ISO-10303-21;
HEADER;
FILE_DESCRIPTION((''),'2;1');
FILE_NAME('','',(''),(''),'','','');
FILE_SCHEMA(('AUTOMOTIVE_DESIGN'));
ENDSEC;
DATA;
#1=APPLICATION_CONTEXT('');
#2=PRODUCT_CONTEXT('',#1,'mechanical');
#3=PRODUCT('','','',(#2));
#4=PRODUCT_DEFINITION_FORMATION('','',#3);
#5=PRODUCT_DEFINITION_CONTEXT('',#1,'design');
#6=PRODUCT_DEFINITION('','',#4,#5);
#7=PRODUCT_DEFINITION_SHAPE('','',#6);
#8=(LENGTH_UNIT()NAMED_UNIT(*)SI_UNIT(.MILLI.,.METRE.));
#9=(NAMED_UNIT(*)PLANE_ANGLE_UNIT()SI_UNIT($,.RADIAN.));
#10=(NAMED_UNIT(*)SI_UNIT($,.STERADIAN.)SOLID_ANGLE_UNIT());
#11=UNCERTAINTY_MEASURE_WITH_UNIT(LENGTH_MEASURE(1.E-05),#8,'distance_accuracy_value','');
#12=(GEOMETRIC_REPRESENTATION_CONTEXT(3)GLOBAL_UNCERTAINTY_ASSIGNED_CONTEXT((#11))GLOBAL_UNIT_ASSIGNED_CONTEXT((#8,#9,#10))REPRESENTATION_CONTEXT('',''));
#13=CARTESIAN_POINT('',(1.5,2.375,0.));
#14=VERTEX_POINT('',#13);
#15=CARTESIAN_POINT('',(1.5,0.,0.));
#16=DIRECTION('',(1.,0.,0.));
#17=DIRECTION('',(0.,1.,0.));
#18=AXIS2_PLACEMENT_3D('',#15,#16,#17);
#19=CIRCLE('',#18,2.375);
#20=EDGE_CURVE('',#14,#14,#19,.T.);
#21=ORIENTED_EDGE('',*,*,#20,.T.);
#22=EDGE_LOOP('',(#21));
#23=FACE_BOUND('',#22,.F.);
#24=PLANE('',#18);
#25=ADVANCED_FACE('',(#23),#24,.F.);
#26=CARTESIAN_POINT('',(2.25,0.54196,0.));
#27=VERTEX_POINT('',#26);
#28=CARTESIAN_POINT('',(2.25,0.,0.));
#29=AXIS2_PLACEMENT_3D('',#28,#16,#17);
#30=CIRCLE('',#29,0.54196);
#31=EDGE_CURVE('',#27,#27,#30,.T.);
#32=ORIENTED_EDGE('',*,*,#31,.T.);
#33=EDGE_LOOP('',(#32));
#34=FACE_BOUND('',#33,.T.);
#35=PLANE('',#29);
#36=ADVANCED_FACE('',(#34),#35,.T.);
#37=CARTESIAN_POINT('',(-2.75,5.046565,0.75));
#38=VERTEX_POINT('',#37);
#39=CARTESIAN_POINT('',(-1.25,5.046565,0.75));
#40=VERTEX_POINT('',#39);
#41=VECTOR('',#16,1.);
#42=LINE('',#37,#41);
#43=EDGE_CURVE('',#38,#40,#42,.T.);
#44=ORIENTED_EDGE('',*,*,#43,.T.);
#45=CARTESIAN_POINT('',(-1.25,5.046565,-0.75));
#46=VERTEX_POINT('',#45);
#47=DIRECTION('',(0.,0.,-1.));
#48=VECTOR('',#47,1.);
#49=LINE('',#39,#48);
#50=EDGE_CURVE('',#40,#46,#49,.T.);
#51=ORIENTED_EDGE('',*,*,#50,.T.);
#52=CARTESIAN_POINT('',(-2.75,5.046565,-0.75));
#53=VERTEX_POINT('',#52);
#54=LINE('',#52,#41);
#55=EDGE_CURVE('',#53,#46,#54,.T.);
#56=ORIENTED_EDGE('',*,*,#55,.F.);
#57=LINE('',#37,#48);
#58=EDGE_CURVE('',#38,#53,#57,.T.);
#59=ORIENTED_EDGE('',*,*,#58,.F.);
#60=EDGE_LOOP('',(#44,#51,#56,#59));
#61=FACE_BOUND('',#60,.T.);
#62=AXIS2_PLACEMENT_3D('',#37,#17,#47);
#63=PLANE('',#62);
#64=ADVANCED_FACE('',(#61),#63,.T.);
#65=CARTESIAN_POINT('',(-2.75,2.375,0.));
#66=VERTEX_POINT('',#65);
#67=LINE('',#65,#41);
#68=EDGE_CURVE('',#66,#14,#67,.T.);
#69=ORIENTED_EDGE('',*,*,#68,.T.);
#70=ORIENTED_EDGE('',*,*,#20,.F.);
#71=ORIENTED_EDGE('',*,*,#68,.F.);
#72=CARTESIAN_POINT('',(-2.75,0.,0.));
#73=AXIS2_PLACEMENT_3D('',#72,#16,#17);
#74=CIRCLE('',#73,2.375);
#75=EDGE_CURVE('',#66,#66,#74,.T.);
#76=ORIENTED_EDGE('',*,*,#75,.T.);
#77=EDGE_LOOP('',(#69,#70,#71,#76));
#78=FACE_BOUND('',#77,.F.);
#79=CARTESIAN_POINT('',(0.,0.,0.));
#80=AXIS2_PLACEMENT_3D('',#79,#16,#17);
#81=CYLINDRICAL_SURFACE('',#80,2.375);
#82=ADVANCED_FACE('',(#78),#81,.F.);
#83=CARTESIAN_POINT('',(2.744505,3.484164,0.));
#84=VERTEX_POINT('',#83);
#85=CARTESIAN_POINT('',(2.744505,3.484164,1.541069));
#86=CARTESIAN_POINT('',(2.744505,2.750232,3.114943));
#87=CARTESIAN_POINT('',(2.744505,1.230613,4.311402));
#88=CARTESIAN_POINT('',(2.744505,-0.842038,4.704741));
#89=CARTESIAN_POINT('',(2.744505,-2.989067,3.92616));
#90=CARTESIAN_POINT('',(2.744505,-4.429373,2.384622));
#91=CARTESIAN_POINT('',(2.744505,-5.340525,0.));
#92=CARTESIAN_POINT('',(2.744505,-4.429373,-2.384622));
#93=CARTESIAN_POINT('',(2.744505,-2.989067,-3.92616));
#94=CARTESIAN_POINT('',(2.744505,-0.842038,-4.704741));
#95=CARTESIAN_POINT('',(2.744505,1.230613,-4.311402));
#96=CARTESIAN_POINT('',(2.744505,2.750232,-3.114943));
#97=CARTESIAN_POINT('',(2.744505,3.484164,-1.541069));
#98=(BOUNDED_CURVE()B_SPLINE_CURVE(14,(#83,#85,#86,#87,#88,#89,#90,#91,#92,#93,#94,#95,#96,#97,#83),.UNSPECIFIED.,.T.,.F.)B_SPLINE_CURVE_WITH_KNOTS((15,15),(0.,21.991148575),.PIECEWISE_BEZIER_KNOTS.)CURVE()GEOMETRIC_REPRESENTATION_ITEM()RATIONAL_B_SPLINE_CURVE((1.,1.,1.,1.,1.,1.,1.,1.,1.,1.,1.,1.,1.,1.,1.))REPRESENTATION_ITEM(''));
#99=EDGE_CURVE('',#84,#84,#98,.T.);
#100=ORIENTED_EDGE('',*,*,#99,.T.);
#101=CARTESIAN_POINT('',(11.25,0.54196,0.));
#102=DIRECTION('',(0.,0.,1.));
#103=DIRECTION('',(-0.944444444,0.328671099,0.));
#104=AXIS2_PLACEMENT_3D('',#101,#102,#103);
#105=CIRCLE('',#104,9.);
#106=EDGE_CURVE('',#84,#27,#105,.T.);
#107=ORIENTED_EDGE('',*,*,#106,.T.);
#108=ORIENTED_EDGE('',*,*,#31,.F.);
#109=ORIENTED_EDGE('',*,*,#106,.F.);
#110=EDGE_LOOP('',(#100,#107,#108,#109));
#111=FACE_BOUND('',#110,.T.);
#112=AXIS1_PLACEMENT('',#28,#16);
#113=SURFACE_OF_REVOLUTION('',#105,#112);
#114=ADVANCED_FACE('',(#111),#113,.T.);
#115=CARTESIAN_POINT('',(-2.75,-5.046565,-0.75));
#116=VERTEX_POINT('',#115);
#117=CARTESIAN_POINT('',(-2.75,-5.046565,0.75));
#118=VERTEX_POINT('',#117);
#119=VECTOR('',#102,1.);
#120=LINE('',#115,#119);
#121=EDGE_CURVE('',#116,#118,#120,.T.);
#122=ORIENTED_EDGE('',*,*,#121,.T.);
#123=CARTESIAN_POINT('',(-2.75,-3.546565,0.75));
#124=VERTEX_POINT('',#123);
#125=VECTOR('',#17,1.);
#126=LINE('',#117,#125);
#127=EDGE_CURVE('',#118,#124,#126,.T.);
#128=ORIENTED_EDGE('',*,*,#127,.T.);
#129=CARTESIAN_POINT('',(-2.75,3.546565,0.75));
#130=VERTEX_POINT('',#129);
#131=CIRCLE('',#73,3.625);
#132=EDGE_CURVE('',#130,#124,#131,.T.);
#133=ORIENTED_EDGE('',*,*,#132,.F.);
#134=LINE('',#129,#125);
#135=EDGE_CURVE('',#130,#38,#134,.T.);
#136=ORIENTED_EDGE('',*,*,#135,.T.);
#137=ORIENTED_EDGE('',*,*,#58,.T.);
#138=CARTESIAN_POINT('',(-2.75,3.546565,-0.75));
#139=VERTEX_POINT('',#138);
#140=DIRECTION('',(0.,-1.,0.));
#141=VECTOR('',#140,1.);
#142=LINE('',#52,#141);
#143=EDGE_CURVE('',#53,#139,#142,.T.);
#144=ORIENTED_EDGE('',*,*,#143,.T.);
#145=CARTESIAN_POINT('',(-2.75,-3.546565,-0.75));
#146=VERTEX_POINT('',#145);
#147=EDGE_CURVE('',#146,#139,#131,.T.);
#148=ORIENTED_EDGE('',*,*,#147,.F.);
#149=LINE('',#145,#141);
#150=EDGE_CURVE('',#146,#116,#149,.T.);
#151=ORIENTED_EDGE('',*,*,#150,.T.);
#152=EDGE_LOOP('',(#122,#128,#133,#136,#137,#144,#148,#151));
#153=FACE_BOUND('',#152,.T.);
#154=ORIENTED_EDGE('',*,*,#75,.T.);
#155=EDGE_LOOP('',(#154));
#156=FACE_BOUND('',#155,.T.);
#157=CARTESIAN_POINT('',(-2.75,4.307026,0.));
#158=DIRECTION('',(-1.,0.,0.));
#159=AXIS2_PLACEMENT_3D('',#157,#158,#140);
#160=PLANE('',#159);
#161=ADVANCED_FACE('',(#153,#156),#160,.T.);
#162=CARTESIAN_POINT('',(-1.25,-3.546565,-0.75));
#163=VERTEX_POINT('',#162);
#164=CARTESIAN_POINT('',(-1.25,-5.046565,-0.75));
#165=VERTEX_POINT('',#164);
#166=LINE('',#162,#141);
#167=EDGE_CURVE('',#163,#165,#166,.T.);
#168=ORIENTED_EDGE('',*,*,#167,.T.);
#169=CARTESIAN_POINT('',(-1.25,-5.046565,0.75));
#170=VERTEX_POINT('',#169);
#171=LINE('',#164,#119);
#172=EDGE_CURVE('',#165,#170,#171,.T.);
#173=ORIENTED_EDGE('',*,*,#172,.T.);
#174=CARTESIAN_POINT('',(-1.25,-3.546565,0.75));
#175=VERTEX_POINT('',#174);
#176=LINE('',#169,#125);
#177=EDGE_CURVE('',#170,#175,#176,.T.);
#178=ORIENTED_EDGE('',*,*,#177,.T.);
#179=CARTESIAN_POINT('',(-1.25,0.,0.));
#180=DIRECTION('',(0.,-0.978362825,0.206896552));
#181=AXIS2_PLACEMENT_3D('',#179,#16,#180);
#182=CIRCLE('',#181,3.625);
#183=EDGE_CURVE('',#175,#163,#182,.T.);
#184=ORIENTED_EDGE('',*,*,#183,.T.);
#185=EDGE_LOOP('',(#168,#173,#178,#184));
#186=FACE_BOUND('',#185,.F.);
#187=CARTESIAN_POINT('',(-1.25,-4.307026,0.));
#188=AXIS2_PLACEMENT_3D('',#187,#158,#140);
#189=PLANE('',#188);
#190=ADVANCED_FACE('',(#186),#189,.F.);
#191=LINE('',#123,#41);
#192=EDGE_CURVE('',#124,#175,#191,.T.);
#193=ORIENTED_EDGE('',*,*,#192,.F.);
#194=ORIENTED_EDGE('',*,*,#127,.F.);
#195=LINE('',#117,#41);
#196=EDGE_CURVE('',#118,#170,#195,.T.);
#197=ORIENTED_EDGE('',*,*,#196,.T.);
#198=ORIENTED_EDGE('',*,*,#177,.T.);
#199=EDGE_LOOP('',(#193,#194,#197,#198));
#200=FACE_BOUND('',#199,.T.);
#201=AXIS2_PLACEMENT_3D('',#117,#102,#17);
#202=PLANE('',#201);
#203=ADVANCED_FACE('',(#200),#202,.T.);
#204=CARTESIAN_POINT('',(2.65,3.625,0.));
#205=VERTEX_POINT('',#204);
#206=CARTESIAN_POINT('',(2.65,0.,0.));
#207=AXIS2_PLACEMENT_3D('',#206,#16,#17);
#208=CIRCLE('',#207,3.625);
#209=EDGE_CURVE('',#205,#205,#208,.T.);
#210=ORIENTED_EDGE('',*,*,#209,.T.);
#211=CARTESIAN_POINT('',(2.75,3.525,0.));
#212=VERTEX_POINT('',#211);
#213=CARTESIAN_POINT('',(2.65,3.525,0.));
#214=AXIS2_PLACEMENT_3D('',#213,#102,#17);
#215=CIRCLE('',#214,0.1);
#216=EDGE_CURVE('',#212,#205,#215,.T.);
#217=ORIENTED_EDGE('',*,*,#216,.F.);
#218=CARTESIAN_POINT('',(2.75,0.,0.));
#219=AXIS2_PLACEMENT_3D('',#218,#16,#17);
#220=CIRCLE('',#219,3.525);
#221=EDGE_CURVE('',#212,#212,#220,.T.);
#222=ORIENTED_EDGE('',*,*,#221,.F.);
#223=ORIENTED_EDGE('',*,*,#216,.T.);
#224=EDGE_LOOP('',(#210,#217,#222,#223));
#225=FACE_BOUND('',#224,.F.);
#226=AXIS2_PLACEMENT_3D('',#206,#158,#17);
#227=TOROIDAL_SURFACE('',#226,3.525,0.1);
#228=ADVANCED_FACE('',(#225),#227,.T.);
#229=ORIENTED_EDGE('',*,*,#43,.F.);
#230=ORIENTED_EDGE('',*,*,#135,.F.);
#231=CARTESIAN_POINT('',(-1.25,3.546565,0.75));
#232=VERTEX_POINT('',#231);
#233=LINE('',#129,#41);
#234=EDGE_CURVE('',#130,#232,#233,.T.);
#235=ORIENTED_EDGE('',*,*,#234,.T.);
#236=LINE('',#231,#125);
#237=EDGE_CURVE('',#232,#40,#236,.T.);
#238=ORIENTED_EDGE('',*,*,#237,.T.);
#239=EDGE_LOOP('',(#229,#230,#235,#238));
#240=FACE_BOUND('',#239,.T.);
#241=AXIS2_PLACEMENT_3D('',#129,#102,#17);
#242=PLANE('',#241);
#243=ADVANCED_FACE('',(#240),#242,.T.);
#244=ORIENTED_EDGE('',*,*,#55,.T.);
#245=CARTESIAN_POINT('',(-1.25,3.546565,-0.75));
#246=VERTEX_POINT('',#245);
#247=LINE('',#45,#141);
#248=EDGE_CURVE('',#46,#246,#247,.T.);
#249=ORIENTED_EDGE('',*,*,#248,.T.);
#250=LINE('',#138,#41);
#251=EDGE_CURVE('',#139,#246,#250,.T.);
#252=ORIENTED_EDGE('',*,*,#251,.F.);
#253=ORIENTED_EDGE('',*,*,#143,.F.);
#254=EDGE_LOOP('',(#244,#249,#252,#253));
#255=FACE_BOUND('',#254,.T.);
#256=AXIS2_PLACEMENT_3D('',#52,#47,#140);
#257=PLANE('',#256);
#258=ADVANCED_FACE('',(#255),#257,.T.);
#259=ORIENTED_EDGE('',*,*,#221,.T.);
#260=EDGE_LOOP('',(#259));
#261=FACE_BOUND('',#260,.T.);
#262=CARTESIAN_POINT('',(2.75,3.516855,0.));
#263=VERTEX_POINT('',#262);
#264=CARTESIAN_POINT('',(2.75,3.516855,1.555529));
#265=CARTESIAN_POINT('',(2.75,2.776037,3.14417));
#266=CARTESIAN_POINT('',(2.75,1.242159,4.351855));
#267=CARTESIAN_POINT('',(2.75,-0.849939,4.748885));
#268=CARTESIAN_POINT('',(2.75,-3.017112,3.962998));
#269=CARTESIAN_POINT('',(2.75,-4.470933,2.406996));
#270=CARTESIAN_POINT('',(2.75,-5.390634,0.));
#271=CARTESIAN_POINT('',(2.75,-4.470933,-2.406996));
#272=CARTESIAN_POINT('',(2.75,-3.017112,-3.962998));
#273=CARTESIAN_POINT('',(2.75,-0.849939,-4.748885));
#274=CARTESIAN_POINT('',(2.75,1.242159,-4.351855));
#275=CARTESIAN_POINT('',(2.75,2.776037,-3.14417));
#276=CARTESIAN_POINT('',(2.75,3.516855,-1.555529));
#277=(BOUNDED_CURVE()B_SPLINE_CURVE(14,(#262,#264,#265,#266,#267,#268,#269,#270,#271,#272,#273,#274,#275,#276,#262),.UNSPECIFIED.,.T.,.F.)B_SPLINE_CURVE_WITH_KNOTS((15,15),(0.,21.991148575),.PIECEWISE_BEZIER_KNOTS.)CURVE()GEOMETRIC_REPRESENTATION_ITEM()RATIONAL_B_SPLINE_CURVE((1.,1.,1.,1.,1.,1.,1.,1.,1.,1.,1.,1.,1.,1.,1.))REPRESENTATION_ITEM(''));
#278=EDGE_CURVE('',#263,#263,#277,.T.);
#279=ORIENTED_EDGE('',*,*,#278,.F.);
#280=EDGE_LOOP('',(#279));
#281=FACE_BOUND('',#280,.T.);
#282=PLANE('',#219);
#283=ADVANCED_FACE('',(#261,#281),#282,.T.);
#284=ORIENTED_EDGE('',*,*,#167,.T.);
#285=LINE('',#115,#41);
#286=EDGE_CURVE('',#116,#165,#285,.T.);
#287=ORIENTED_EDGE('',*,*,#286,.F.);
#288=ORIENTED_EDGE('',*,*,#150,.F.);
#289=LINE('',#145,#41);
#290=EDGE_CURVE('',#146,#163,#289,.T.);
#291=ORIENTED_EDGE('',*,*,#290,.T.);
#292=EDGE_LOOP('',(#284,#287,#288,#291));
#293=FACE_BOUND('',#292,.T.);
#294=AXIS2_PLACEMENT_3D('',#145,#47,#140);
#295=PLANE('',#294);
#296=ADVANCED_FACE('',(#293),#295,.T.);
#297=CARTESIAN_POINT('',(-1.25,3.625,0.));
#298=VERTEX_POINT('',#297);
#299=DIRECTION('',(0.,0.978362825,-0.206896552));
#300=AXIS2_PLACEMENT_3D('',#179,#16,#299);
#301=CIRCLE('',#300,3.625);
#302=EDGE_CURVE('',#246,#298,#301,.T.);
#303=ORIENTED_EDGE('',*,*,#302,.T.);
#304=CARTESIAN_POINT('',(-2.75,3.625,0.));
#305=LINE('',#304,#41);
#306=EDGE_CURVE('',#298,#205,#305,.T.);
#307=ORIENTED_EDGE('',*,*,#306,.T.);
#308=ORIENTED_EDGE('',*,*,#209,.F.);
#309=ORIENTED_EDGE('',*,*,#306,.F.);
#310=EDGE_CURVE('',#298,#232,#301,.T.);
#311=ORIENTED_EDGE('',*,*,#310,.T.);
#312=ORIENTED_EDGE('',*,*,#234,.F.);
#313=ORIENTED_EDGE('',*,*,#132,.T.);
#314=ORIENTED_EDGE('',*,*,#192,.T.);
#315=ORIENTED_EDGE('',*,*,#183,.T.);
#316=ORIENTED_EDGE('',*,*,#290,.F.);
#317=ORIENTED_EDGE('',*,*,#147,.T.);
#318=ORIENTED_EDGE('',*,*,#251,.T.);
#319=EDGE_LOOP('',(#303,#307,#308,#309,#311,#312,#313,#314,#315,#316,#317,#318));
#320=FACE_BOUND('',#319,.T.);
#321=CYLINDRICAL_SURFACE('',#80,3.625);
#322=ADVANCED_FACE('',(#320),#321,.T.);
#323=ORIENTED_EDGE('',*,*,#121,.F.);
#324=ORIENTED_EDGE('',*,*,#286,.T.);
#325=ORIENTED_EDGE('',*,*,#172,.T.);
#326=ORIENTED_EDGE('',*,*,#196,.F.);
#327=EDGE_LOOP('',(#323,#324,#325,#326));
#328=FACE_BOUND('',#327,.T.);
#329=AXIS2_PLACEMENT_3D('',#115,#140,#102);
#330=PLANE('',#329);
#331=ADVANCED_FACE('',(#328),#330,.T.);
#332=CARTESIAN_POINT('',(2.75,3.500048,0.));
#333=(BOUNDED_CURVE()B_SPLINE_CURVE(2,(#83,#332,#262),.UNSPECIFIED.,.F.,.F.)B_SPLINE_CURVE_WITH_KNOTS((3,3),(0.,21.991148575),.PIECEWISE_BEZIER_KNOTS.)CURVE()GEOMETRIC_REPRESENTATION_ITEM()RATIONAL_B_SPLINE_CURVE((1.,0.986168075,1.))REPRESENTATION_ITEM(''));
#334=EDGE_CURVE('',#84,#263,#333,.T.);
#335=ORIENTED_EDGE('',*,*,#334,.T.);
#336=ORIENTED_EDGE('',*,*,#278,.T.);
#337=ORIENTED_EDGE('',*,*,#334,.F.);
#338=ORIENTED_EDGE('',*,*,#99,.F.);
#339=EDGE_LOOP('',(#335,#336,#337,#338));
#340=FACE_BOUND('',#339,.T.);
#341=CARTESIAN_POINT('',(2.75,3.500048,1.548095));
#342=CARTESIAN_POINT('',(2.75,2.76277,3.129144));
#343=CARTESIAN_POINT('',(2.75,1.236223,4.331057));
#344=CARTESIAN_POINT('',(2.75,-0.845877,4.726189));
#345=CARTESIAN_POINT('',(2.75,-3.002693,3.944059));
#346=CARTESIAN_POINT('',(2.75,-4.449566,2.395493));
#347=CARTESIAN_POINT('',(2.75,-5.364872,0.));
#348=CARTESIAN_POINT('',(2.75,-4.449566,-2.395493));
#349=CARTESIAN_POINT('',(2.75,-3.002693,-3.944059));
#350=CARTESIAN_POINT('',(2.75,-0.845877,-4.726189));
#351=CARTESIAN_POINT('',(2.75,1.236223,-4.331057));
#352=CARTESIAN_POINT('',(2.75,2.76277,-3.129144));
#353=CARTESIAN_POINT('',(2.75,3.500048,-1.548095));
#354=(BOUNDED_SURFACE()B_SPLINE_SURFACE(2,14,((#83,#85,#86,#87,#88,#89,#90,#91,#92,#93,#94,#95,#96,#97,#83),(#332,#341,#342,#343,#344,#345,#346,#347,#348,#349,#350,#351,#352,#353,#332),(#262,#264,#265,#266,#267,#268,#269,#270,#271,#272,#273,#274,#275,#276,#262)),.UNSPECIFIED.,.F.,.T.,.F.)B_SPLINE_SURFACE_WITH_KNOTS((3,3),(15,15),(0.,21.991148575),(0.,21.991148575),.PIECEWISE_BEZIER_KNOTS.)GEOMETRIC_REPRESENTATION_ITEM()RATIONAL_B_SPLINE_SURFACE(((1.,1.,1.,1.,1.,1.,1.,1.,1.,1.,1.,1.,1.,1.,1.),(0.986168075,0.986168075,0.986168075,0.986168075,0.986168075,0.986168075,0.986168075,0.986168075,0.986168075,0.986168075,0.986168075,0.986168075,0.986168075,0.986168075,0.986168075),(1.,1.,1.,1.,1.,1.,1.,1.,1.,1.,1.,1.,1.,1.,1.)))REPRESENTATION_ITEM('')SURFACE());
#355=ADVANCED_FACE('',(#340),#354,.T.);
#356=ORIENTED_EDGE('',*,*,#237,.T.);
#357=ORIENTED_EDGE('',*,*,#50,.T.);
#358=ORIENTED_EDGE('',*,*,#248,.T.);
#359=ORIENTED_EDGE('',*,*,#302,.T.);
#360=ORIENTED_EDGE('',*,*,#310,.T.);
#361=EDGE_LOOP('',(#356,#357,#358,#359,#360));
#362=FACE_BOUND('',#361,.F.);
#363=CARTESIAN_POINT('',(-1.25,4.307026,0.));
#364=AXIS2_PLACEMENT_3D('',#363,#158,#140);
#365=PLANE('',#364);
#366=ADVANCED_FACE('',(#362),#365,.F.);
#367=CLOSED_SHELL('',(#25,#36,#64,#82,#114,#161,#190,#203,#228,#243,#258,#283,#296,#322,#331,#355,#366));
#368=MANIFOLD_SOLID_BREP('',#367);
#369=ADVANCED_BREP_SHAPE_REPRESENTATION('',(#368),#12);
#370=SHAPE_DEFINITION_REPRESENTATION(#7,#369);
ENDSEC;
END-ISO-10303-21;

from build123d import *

# Parameters (mm, degrees)
F0_R     = 3.625
F1_DEPTH = 2.75
F2_T     = -1.25
F4_DEPTH = 1.5
F5_R     = 3.5
F6_DEPTH = 0.5
F8_R     = 0.1


# Not quite as in the source:
# - a fillet or chamfer that OpenCascade refuses, or shapes differently, is made with other operations: its cross-section is extruded or revolved along the edge and cut away or added


with BuildPart() as f1:
    # F0 (on Right) → F1 (new body, symmetric)
    with BuildSketch(Plane.YZ):
        Circle(F0_R)
    extrude(amount=F1_DEPTH, both=True)

    # F2
    f2_openings = [f1.faces().sort_by_distance(p)[0] for p in [
        (-2.75, 0, 0),
    ]]
    offset(amount=F2_T, openings=f2_openings)

    # F3 (on face) → F4 (join)
    with BuildSketch(Plane(origin=(-2.75, 0, 0), x_dir=(0, -1, 0), z_dir=(-1, 0, 0))):
        with BuildLine():
            Line((3.5465652398, -0.75), (5.0465652398, -0.75))
            Line((5.0465652398, -0.75), (5.0465652398, 0.75))
            Line((5.0465652398, 0.75), (3.5465652398, 0.75))
            ThreePointArc((3.5465652398, 0.75), (3.625, 0), (3.5465652398, -0.75))
        make_face()
        with BuildLine():
            Line((-3.5465652398, 0.75), (-5.0465652398, 0.75))
            Line((-5.0465652398, 0.75), (-5.0465652398, -0.75))
            Line((-5.0465652398, -0.75), (-3.5465652398, -0.75))
            ThreePointArc((-3.5465652398, -0.75), (-3.625, 0), (-3.5465652398, 0.75))
        make_face()
    extrude(amount=-F4_DEPTH)

    # F5 (on face) → F6 (cut)
    with BuildSketch(Plane.YZ.offset(2.75)):
        Circle(F5_R)
    extrude(amount=-F6_DEPTH, mode=Mode.SUBTRACT)

    # F7: fillet of radius 9 on 1 edges, made by hand

    # F7_s1 → F7_t2 (revolve)
    with BuildSketch(Plane.XY):
        with BuildLine():
            ThreePointArc((2.75, 3.5), (2.3758803254, 2.0419601084), (2.25, 0.5419601084))
            Line((2.25, 0.5419601084), (2.25, 3.5))
            Line((2.25, 3.5), (2.75, 3.5))
        make_face()
    revolve(axis=Axis((2.25, 0, 0), (1, 0, 0)))

    # F8
    f8_edges = [f1.edges().sort_by_distance(p)[0] for p in [
        (2.75, -3.5, 0),
        (2.75, -3.625, 0),
    ]]
    fillet(f8_edges, radius=F8_R)


solid = f1.part
